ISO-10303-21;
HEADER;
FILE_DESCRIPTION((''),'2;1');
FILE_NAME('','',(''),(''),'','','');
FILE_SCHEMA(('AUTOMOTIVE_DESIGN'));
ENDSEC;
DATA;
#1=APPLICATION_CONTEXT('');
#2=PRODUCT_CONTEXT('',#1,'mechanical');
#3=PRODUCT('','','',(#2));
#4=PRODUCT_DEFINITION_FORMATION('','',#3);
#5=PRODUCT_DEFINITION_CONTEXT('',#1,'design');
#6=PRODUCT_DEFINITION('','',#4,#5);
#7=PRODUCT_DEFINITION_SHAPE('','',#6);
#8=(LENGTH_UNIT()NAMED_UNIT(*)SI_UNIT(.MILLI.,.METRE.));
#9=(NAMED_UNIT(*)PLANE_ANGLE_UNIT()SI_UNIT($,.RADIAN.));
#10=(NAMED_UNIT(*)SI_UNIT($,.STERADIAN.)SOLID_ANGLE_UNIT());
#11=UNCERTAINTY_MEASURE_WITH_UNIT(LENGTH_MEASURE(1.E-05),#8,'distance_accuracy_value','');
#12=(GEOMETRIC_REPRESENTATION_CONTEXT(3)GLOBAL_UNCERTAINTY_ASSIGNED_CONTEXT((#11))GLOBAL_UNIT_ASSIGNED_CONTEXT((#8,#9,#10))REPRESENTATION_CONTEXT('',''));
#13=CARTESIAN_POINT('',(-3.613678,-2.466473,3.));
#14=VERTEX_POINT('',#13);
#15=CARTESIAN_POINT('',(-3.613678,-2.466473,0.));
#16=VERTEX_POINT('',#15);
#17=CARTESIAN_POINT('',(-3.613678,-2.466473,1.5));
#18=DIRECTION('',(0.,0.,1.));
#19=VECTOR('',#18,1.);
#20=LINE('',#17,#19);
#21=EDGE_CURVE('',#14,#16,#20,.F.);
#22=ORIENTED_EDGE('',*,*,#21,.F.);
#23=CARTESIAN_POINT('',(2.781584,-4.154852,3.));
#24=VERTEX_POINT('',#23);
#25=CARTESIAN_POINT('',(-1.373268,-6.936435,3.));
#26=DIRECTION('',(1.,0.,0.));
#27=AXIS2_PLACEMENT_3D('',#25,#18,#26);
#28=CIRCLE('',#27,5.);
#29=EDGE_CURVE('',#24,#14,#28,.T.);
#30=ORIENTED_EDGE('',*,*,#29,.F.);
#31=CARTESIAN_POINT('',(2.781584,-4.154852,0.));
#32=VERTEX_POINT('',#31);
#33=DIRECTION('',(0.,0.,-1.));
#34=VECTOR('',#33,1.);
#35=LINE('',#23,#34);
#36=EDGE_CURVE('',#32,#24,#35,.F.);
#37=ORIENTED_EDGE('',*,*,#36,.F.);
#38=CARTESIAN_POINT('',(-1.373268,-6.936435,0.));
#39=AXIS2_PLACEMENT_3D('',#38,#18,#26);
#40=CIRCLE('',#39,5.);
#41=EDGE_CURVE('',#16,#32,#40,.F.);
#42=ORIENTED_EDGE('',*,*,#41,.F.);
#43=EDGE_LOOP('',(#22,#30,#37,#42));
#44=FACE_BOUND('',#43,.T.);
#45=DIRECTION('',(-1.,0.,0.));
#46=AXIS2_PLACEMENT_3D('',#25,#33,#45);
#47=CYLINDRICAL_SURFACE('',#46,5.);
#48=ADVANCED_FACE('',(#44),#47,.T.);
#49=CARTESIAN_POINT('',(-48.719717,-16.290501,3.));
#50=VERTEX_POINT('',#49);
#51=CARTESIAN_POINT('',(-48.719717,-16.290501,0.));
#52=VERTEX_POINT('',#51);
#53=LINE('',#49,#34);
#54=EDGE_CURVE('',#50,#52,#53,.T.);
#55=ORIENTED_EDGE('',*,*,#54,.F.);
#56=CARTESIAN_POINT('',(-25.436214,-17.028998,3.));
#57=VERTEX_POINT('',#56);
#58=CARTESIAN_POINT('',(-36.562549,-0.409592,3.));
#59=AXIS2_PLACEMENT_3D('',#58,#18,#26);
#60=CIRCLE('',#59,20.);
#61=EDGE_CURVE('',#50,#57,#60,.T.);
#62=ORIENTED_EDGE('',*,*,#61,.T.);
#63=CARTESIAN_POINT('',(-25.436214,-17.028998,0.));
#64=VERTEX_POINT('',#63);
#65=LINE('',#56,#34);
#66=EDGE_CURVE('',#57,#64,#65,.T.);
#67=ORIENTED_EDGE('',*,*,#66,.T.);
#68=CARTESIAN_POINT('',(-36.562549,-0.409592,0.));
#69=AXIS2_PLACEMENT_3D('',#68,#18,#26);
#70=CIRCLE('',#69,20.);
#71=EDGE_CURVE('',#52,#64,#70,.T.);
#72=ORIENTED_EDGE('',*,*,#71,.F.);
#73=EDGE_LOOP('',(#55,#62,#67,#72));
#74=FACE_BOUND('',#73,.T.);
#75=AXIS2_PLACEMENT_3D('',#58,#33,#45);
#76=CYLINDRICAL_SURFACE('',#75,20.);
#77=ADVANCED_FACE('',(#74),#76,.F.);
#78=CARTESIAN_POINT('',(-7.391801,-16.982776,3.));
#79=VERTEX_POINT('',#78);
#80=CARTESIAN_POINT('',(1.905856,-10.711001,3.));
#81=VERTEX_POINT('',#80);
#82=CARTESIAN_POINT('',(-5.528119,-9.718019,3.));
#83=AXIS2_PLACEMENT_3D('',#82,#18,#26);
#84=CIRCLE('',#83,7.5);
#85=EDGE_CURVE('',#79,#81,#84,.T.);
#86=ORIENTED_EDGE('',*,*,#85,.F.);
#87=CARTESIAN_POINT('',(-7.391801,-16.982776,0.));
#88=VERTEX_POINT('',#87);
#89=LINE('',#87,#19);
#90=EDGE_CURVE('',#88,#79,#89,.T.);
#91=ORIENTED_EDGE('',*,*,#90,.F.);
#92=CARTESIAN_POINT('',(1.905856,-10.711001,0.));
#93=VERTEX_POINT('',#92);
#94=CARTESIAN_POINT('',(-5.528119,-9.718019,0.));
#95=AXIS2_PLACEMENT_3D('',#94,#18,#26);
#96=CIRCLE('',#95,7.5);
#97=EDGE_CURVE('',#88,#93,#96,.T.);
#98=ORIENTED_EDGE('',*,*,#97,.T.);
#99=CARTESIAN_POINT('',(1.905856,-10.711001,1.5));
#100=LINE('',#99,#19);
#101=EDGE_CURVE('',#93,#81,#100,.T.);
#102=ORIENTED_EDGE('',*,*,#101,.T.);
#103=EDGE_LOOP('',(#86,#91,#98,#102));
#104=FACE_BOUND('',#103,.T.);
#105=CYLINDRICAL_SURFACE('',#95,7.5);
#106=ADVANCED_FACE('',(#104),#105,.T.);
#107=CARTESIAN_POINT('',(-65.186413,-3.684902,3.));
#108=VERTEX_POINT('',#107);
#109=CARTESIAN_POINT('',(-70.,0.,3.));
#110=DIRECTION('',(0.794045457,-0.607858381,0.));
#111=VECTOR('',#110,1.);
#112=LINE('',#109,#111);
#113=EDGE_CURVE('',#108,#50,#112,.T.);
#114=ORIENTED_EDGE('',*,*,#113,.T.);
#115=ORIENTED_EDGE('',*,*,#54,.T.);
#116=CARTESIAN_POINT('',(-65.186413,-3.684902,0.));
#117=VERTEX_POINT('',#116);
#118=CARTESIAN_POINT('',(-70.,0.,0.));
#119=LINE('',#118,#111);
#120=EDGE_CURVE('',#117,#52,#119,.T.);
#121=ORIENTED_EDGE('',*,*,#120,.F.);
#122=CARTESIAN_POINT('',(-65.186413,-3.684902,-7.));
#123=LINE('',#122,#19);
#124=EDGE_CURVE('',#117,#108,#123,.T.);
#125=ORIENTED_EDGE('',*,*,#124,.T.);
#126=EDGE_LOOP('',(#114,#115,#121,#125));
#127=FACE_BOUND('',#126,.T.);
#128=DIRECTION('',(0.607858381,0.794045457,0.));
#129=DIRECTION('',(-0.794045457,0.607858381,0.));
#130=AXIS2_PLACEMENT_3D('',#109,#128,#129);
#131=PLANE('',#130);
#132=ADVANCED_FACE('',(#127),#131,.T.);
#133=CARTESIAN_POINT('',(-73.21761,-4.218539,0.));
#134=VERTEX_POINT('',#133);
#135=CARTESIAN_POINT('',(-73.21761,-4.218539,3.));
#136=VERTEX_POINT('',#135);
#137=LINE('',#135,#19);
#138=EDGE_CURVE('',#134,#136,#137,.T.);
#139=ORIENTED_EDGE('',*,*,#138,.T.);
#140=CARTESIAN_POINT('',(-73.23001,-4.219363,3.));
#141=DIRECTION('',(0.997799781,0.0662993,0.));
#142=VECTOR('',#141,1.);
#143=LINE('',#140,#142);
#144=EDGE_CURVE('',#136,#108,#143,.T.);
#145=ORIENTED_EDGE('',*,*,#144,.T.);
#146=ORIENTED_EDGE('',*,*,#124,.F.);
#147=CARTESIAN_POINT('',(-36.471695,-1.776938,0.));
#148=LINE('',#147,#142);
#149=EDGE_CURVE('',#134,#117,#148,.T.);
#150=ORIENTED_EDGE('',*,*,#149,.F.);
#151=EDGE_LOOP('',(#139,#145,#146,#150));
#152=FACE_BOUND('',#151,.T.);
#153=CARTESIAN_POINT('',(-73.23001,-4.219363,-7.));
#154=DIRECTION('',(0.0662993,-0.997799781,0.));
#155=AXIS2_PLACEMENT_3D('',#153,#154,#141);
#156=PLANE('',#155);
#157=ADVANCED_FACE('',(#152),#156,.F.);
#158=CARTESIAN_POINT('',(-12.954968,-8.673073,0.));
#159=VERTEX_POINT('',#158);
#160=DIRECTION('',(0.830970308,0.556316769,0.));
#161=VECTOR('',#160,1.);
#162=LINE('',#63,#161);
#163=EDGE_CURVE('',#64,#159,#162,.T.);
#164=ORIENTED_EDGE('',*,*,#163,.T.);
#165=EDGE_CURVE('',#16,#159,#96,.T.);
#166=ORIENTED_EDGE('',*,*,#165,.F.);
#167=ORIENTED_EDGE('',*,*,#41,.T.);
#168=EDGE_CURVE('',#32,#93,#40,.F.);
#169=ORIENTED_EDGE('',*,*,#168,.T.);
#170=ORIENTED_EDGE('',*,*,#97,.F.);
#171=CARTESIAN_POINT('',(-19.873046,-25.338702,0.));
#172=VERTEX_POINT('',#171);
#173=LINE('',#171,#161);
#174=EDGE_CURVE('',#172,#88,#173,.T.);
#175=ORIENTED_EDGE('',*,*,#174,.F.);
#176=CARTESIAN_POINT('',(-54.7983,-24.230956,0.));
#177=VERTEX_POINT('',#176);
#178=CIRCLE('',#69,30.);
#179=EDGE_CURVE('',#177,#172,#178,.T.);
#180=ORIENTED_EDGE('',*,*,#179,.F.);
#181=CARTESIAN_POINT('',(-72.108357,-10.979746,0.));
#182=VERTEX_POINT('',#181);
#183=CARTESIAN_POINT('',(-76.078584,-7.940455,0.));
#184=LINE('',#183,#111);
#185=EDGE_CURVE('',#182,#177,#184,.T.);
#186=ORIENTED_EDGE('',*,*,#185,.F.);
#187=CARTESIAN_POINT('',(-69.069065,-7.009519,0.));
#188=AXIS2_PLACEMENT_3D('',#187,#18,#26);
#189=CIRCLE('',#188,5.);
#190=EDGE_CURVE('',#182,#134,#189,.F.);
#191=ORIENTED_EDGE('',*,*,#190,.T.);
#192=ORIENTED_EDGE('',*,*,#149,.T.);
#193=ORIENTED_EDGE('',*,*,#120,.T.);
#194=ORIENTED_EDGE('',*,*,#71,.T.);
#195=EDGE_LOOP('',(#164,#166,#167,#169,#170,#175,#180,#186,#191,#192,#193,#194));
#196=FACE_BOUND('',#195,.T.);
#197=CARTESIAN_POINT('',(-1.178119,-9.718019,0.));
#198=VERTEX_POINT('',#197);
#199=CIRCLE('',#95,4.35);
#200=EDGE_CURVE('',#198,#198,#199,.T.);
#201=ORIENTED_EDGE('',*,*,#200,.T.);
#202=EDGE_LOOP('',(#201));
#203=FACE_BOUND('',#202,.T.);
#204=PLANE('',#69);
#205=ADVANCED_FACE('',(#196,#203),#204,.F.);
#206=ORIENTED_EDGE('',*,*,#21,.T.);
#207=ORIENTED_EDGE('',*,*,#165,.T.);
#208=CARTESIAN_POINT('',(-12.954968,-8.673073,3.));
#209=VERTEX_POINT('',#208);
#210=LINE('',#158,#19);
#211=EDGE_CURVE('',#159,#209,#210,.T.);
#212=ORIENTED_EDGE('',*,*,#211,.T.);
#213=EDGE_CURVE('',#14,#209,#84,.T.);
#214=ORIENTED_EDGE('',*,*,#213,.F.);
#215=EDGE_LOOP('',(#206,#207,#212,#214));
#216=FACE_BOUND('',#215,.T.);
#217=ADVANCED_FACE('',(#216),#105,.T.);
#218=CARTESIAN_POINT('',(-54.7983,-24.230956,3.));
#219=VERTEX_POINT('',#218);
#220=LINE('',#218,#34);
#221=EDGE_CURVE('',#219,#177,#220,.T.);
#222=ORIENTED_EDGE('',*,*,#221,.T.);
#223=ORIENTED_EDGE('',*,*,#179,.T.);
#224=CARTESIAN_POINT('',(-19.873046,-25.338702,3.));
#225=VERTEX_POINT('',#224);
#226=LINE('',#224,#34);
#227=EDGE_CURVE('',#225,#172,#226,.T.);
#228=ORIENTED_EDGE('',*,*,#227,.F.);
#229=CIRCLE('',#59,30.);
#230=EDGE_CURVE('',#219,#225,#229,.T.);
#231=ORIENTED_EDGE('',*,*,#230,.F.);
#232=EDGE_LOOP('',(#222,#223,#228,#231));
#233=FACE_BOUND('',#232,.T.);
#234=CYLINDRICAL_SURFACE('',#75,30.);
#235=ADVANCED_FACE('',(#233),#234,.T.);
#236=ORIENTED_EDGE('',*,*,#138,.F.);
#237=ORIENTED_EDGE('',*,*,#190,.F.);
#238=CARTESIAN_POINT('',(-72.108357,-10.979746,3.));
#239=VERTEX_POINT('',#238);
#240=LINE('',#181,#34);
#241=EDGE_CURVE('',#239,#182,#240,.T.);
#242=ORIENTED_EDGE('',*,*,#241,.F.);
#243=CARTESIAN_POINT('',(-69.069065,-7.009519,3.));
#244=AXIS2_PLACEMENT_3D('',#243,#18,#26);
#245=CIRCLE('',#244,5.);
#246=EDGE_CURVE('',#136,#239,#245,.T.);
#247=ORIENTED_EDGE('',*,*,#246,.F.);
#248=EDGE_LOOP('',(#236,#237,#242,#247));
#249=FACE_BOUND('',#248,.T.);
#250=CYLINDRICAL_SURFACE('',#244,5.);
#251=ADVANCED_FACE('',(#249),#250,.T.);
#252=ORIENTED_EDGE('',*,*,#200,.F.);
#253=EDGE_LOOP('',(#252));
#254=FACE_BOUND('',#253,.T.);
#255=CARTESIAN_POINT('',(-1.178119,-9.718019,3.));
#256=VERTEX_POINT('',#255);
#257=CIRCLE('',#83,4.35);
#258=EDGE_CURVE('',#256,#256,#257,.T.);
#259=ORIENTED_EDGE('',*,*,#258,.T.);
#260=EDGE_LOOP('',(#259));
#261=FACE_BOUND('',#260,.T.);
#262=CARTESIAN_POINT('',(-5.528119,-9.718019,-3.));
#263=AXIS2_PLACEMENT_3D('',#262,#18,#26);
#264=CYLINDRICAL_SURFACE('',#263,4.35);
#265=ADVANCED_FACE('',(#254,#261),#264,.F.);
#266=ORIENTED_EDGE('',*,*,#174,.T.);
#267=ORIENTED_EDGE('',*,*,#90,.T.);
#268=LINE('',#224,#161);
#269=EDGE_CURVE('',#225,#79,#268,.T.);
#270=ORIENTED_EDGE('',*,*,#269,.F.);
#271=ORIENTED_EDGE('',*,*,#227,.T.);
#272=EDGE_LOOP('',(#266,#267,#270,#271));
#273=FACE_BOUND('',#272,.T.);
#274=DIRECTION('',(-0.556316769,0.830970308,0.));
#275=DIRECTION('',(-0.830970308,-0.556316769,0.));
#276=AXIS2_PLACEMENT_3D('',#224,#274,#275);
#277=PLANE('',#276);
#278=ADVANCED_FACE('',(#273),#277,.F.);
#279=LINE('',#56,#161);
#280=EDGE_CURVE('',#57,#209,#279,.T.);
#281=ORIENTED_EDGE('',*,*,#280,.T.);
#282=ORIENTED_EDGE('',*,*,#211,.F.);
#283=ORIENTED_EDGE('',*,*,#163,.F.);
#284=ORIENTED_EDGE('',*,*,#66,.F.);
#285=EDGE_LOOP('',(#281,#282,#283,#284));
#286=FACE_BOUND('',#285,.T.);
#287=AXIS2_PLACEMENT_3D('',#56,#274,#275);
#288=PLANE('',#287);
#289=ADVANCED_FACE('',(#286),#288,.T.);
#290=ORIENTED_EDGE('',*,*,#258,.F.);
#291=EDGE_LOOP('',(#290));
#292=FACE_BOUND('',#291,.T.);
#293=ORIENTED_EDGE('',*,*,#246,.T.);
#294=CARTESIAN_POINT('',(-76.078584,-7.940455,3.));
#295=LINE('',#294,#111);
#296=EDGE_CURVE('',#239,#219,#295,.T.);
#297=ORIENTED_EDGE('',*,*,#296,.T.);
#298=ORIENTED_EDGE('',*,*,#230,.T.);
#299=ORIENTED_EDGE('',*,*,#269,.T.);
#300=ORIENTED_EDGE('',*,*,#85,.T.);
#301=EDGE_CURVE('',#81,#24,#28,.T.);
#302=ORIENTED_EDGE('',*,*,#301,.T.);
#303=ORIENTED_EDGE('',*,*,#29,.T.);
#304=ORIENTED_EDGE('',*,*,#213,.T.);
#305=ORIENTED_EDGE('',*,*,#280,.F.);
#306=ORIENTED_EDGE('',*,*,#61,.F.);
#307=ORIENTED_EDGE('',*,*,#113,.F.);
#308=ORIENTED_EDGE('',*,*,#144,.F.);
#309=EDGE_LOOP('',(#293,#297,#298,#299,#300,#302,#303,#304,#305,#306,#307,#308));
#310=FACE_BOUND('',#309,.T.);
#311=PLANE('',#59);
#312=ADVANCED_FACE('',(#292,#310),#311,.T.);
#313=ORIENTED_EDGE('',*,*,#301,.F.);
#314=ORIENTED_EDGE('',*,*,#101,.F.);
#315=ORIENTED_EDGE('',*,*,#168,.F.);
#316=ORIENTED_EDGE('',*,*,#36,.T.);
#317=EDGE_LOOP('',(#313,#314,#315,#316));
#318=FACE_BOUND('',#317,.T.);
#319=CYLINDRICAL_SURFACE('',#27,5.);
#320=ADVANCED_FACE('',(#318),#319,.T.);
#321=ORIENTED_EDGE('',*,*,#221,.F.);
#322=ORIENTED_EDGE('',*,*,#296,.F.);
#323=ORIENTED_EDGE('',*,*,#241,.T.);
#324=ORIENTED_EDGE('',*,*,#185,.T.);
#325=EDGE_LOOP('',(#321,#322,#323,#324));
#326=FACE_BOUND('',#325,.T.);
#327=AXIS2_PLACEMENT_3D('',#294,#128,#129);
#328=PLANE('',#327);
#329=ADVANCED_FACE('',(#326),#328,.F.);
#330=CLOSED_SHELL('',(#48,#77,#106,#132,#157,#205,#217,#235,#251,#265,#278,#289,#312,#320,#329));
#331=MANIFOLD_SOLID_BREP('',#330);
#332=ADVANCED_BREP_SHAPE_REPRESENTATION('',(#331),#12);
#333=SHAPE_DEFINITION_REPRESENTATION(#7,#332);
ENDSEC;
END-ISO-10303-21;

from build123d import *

# Parameters (mm, degrees)
EXTRU_MINCE1_DEPTH      = 3
CONG_1_R                = 5
ESQUISSE2_R             = 7.5
BOSS_EXTRU_1_DEPTH      = 3
ESQUISSE3_R             = 4.35
ENL_V_MAT_EXTRU_1_DEPTH = 6
ENL_V_MAT_EXTRU_2_DEPTH = 10


with BuildPart() as part:
    # Esquisse1 → Extru.-Mince1 (new body)
    with BuildSketch(Plane.XY):
        with BuildLine():
            Line((-70, 0), (-48.719716507, -16.290501455))
            ThreePointArc((-48.719716507, -16.290501455), (-37.196582195, -20.399539826), (-25.436213508, -17.028998471))
            Line((-25.436213508, -17.028998471), (0, 0))
            Line((0, 0), (5.563167687, -8.309703081))
            Line((5.563167687, -8.309703081), (-19.873045821, -25.338701551))
            ThreePointArc((-19.873045821, -25.338701551), (-37.513598853, -30.394513585), (-54.79830032, -24.230956028))
            Line((-54.79830032, -24.230956028), (-76.078583813, -7.940454573))
            Line((-76.078583813, -7.940454573), (-70, 0))
        make_face()
    extrude(amount=EXTRU_MINCE1_DEPTH)

    # Congé1
    cong_1_edges = [part.edges().sort_by_distance(p)[0] for p in [
        (-76.078583813, -7.940454573, 1.5),
        (5.563167687, -8.309703081, 1.5),
        (0, 0, 1.5),
    ]]
    fillet(cong_1_edges, radius=CONG_1_R - 0.0001)  # a hair under: the kernel refuses the full size

    # Esquisse2 → Boss.-Extru.1 (add)
    with BuildSketch(Plane.XY.offset(3)):
        with Locations((-5.528119238, -9.718019227)):
            Circle(ESQUISSE2_R)
    extrude(amount=-BOSS_EXTRU_1_DEPTH)

    # Esquisse3 → Enlèv. mat.-Extru.1 (cut)
    with BuildSketch(Plane.XY.offset(3)):
        with Locations((-5.528119238, -9.718019227)):
            Circle(ESQUISSE3_R)
    extrude(amount=-ENL_V_MAT_EXTRU_1_DEPTH, mode=Mode.SUBTRACT)

    # Esquisse4 → Enlèv. mat.-Extru.2 (cut)
    with BuildSketch(Plane.XY.offset(3)):
        Polygon((-73.230010145, -4.219362538), (-65.186412562, -3.684901716), (-70, 0), align=None)
    extrude(amount=-ENL_V_MAT_EXTRU_2_DEPTH, mode=Mode.SUBTRACT)


solid = part.part
